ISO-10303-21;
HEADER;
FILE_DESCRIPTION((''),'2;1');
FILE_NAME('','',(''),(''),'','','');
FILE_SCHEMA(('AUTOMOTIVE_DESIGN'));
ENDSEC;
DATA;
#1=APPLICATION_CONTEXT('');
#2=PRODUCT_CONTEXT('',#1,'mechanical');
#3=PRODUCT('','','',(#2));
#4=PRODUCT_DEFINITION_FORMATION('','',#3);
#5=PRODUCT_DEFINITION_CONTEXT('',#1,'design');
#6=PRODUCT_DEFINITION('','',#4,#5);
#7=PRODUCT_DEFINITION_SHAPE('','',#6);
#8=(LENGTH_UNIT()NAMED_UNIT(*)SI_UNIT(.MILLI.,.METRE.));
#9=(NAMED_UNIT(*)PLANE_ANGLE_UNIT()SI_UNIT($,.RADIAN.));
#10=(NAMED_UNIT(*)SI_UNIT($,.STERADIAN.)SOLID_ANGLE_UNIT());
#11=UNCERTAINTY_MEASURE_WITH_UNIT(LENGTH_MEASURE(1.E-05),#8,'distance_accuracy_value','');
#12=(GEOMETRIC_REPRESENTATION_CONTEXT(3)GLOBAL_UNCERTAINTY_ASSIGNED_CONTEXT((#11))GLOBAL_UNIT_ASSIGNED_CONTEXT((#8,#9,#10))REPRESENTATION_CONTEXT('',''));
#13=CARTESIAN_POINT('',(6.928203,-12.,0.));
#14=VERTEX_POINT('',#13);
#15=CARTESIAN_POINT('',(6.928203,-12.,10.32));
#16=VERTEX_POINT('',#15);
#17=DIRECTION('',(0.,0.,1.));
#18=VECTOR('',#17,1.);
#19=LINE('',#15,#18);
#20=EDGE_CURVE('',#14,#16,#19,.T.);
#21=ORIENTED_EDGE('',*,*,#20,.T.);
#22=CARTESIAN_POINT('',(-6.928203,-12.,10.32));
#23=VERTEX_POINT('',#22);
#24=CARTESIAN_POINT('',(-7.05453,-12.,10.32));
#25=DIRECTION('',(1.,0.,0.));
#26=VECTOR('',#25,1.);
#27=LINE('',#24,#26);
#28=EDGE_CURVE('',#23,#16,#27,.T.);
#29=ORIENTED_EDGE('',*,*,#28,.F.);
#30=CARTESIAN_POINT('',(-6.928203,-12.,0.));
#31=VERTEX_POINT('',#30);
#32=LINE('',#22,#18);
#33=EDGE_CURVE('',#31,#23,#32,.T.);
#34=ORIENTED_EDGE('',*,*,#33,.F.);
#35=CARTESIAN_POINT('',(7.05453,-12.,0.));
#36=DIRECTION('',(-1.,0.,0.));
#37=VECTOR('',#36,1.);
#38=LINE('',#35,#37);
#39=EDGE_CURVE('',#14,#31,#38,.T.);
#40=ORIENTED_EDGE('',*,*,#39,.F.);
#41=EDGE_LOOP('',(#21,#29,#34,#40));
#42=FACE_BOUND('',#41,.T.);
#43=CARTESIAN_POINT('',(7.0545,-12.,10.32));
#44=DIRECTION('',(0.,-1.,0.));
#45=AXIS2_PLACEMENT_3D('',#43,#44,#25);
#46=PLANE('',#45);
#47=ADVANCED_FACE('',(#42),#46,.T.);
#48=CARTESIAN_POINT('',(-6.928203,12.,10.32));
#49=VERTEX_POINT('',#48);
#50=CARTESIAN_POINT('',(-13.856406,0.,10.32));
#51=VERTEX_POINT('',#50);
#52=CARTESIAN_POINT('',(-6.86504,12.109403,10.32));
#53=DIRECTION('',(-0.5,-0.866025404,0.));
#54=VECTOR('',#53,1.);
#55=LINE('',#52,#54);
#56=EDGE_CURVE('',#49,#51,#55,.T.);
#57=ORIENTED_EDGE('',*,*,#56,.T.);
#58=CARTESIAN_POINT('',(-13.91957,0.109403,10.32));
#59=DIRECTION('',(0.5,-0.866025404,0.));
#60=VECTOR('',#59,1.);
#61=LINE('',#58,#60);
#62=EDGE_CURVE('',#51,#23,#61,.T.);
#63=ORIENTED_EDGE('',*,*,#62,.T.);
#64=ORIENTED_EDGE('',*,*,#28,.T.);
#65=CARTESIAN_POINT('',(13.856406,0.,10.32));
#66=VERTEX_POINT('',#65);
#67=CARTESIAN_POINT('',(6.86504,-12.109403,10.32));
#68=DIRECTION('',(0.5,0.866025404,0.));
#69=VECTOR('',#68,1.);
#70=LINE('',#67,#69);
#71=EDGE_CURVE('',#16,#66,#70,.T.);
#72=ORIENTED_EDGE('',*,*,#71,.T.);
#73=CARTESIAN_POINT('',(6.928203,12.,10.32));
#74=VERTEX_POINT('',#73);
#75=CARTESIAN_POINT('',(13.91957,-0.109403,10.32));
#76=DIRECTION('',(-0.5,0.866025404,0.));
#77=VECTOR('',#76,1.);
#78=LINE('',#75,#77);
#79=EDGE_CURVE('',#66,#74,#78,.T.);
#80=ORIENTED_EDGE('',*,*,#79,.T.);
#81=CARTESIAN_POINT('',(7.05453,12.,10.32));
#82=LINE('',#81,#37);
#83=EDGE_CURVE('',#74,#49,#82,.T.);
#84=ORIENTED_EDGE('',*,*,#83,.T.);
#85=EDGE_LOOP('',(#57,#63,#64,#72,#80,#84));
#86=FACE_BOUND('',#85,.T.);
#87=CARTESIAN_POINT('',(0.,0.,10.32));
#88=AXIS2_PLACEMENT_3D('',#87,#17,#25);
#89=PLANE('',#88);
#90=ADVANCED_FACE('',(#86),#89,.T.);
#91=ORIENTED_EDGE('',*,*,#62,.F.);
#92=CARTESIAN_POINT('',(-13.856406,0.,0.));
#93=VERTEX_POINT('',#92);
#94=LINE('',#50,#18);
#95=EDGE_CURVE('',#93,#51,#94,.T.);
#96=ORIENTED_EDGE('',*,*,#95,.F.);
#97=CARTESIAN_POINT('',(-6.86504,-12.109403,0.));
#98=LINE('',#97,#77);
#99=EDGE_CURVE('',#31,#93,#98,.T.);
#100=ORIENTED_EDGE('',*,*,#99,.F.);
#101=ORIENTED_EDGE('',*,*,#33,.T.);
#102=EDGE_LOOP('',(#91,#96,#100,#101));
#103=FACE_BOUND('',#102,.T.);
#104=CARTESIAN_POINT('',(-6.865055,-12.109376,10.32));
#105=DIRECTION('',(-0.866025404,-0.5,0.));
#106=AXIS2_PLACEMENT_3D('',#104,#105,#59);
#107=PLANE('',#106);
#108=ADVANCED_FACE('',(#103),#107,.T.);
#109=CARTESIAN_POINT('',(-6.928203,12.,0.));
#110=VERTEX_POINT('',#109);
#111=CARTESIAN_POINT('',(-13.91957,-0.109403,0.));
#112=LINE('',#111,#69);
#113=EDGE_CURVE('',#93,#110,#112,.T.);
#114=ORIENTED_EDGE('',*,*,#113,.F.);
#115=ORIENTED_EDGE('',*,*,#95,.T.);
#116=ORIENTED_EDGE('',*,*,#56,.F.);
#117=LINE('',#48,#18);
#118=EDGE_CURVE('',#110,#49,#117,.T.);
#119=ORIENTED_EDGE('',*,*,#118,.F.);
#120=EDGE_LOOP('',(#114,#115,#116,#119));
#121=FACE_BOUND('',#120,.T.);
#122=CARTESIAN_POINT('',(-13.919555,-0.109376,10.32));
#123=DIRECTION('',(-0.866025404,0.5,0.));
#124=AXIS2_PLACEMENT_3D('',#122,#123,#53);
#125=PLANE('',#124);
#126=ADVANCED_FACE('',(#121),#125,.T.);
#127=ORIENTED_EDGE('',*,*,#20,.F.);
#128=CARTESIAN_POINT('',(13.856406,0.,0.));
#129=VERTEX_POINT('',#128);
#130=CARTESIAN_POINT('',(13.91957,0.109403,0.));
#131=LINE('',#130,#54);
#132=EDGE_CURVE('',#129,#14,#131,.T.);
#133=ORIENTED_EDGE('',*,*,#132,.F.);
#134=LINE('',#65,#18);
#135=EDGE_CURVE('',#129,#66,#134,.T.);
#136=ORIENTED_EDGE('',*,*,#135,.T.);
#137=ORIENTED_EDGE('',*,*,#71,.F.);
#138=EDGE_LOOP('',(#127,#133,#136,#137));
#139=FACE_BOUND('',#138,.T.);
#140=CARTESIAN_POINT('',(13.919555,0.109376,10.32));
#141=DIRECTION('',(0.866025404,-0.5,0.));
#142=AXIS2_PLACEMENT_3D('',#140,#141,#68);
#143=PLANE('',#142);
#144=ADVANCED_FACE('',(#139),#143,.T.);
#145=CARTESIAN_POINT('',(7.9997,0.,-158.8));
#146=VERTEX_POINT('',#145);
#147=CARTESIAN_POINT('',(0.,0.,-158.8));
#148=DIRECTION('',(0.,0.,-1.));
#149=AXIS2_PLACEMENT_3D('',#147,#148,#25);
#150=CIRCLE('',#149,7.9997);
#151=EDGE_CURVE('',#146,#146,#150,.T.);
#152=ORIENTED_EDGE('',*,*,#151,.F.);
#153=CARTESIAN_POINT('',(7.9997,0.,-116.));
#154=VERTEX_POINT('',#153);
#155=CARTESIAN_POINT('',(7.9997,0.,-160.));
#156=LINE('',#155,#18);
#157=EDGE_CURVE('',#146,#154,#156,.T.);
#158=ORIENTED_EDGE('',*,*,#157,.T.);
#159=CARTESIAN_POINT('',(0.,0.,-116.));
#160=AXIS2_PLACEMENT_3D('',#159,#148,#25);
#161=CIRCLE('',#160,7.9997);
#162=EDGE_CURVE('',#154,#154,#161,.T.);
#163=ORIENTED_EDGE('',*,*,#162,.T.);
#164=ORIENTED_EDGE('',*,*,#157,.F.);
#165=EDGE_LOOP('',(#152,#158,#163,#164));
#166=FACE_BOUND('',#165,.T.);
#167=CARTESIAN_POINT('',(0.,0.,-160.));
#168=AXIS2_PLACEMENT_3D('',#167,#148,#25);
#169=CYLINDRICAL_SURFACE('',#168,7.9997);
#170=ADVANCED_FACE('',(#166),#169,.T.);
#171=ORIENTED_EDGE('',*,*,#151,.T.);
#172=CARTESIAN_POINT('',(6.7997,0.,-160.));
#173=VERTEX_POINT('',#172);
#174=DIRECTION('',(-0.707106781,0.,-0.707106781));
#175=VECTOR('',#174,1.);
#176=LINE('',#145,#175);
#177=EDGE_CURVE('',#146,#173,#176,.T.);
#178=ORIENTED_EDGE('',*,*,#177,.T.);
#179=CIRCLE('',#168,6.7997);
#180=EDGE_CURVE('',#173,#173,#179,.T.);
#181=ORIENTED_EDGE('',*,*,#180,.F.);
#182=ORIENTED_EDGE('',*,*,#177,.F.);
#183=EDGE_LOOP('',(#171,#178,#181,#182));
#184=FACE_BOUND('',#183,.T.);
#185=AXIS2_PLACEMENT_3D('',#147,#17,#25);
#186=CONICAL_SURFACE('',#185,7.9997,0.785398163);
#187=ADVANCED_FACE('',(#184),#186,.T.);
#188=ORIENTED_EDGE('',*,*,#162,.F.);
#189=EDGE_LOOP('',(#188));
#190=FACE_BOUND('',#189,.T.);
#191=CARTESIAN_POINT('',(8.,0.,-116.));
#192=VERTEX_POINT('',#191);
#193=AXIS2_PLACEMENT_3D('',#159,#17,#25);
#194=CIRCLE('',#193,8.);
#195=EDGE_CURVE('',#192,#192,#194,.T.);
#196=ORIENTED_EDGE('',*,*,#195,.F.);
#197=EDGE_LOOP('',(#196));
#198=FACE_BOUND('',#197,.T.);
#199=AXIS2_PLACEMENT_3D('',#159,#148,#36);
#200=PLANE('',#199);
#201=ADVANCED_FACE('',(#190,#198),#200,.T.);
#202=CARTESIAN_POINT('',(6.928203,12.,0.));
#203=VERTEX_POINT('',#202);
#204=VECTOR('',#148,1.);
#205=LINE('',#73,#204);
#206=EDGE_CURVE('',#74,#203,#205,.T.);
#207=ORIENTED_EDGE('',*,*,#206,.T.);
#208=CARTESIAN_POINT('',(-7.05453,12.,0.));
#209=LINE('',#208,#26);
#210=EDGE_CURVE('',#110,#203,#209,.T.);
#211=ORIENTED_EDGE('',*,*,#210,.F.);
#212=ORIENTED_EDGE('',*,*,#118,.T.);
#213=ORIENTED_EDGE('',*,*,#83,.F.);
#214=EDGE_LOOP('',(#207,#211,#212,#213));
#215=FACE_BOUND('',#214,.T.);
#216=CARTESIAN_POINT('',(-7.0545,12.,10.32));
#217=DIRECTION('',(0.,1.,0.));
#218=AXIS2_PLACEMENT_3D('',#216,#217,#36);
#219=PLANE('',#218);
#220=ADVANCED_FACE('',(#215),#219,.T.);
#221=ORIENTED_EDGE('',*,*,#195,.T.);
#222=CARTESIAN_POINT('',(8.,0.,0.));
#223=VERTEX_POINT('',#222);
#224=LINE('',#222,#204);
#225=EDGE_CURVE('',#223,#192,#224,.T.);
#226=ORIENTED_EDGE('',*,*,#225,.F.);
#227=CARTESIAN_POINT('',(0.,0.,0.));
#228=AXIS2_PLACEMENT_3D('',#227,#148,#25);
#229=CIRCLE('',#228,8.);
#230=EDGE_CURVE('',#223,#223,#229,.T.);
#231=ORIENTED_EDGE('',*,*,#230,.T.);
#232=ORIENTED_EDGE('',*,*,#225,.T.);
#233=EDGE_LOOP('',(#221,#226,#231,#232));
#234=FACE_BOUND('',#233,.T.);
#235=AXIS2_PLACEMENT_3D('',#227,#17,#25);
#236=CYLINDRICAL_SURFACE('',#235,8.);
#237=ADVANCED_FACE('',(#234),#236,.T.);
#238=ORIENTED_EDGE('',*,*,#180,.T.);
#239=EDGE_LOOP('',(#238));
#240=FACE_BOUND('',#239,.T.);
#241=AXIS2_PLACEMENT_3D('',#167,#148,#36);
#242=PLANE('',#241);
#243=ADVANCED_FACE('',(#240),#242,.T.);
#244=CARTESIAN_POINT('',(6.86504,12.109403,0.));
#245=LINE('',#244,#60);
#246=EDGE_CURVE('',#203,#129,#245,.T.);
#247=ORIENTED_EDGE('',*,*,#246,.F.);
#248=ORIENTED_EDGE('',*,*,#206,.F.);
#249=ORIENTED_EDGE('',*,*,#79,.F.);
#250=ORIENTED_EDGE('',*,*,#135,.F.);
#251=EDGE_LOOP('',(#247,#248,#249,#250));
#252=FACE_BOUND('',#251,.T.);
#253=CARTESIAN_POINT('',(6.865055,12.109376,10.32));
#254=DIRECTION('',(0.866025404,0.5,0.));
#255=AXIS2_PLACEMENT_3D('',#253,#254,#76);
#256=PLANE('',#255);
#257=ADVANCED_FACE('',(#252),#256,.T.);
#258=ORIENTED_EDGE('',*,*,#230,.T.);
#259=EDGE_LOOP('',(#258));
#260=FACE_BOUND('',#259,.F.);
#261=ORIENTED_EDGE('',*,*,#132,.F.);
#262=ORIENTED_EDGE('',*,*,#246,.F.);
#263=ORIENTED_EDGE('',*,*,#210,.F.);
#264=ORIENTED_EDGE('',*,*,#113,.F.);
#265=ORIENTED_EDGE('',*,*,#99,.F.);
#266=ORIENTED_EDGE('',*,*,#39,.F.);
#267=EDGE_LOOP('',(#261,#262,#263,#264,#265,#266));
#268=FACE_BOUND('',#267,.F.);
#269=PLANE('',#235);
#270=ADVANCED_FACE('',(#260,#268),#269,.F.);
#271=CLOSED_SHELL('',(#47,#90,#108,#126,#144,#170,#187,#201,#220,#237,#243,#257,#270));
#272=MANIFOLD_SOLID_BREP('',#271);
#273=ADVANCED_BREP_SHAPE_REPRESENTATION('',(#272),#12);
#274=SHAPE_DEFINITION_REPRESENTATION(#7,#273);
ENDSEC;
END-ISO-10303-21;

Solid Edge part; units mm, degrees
sketch "Sketch1" plane through (0, 0, 0) normal (0, 0, 1) x (1, 0, 0)
  circle A0 centre (0, 0) radius 13.92
  dimension "D1" = 27.84
extrude "Protrusion1" add sketch "Sketch1" along normal blind 10.32
sketch "Sketch2" plane through (0, 0, 0) normal (0, 0, -1) x (1, 0, 0)
  circle A0 centre (0, 0) radius 8
extrude "Protrusion2" add sketch "Sketch2" along normal blind 160
sketch "Sketch3" plane through (0, 0, -160) normal (0, 0, -1) x (1, 0, 0)
  circle A0 centre (0, 0) radius 7.9997
extrude "Cutout1" cut sketch "Sketch3" against normal blind 44 flip side to cut
chamfer "Chamfer_1" distance 1.2 angle 45 1 edges at (-7.9997, 0, -160)
sketch "Sketch4" plane through (0, 0, 10.32) normal (0, 0, 1) x (1, 0, 0)
  line L0 (-7.0545, 12) -> (7.0545, 12)
  dimension "D1" = 24
extrude "Cutout2" cut sketch "Sketch4" against normal up to next material side at (0, 12.05, 10.32)
pattern_circular "Pattern1" count 6 over 360 about axis through (0, 0, 10.32) along (0, 0, 1) of "Cutout2"
properties part number "24104329"
